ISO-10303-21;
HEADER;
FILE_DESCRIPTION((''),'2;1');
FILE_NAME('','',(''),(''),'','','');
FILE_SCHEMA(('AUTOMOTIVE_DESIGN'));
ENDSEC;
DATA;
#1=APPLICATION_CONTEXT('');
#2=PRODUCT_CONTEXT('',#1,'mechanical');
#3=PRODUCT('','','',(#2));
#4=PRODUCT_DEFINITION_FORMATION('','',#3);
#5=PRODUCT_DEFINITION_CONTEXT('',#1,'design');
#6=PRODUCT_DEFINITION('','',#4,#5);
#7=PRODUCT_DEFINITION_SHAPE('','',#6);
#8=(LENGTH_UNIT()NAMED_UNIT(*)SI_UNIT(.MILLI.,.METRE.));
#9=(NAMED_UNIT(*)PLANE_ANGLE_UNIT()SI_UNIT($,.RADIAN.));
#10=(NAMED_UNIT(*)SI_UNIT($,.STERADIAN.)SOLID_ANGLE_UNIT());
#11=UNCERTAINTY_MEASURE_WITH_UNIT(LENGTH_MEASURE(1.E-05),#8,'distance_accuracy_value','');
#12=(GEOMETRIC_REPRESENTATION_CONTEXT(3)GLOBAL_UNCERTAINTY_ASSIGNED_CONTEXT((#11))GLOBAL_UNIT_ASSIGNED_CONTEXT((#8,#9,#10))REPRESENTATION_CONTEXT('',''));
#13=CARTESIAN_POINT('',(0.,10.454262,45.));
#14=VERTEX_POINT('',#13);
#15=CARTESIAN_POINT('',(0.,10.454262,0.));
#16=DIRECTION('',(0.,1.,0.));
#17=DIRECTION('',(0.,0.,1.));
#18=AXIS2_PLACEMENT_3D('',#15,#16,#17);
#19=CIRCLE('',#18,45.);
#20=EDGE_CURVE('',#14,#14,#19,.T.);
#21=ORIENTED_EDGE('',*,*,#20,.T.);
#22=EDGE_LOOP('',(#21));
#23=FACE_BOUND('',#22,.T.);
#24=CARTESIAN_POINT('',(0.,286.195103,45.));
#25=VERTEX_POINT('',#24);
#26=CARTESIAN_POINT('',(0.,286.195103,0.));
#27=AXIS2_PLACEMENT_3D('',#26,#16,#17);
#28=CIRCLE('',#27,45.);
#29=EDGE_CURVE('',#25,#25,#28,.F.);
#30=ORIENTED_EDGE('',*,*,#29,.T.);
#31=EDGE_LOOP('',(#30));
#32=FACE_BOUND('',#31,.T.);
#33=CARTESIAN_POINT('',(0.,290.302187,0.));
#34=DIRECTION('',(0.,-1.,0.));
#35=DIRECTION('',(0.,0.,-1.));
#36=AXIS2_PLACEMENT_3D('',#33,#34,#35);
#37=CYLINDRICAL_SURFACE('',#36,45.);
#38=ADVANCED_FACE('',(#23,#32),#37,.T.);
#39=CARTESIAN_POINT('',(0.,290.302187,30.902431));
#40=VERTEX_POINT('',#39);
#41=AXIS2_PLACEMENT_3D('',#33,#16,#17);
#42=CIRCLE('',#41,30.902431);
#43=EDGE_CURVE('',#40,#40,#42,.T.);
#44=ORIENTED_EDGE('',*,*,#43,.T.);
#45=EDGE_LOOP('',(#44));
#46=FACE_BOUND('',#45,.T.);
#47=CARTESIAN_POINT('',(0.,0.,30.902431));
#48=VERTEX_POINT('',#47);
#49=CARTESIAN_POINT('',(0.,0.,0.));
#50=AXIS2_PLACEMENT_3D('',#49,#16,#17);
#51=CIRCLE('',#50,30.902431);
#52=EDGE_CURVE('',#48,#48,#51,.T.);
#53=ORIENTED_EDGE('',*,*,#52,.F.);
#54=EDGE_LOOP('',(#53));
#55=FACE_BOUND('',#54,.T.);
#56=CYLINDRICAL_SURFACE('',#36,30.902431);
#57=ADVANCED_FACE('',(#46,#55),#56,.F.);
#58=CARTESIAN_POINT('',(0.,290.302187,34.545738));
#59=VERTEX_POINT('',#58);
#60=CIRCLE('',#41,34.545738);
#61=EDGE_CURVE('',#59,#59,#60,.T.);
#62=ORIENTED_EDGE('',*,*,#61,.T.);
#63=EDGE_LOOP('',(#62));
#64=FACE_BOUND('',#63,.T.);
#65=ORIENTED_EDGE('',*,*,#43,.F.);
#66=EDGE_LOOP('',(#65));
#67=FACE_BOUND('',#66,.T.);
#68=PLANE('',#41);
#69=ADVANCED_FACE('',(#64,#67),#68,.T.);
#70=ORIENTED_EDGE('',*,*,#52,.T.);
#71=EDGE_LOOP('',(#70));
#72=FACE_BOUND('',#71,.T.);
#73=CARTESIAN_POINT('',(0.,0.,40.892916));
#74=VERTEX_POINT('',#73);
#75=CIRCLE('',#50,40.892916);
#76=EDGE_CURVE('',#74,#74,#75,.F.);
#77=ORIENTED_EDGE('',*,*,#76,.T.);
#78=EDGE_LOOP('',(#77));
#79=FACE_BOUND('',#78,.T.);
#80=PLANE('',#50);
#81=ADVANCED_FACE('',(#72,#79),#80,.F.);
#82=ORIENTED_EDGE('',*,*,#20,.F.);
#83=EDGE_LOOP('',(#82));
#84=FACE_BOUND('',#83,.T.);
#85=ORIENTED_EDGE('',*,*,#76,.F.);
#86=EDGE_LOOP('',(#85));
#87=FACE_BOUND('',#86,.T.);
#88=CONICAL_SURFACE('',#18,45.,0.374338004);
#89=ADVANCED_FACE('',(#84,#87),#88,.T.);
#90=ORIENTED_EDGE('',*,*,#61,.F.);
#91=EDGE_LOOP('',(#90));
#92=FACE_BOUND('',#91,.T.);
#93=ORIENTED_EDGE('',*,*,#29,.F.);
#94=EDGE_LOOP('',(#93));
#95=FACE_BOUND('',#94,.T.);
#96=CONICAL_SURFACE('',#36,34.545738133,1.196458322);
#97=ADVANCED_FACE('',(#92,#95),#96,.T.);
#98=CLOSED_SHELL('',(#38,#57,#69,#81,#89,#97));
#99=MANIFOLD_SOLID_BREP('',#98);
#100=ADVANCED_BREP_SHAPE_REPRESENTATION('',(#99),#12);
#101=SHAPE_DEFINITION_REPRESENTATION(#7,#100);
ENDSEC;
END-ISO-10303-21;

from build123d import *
from OCP.BRepFilletAPI import BRepFilletAPI_MakeChamfer

# Parameters (mm, degrees)
SKETCH1_R           = 45
BOSS_EXTRUDE1_DEPTH = 290.302187475
SKETCH2_R           = 30.902431237
CUT_EXTRUDE1_DEPTH  = 298.195827785
CHAMFER1_SIZE       = 4.107084406
CHAMFER1_SIZE2      = 10.454261867


with BuildPart() as part:
    # Sketch1 → Boss-Extrude1 (new body)
    with BuildSketch(Plane(origin=(0, 0, 0), x_dir=(1, 0, 0), z_dir=(0, 1, 0))):
        Circle(SKETCH1_R)
    extrude(amount=BOSS_EXTRUDE1_DEPTH)

    # Sketch2 → Cut-Extrude1 (cut, through all)
    with BuildSketch(Plane(origin=(0, 0, 0), x_dir=(1, 0, 0), z_dir=(0, 1, 0))):
        Circle(SKETCH2_R)
    extrude(amount=CUT_EXTRUDE1_DEPTH, mode=Mode.SUBTRACT)

    # Chamfer1: one chamfer whose edges measure the first distance from different faces: ONE call of the kernel's chamfer builder (chamfer() names one face for all edges)
    chamfer1_edges_1 = [part.edges().sort_by_distance(p)[0] for p in [
        (-45, 290.302187475, 0),
    ]]
    chamfer1_side_1 = [part.faces().sort_by_distance(p)[0] for p in [
        (-45, 145.151093738, 0),
    ]]
    chamfer1_edges_2 = [part.edges().sort_by_distance(p)[0] for p in [
        (-45, 0, 0),
    ]]
    chamfer1_side_2 = [part.faces().sort_by_distance(p)[0] for p in [
        (-43.727207794, 0, 0),
    ]]
    chamfer1 = BRepFilletAPI_MakeChamfer(part.part.solid().wrapped)
    for e in chamfer1_edges_1:
        chamfer1.Add(CHAMFER1_SIZE, CHAMFER1_SIZE2, e.wrapped, chamfer1_side_1[0].wrapped)  # the first distance lies on this face
    for e in chamfer1_edges_2:
        chamfer1.Add(CHAMFER1_SIZE, CHAMFER1_SIZE2, e.wrapped, chamfer1_side_2[0].wrapped)  # the first distance lies on this face
    add(Compound.cast(chamfer1.Shape()), mode=Mode.REPLACE)


solid = part.part
